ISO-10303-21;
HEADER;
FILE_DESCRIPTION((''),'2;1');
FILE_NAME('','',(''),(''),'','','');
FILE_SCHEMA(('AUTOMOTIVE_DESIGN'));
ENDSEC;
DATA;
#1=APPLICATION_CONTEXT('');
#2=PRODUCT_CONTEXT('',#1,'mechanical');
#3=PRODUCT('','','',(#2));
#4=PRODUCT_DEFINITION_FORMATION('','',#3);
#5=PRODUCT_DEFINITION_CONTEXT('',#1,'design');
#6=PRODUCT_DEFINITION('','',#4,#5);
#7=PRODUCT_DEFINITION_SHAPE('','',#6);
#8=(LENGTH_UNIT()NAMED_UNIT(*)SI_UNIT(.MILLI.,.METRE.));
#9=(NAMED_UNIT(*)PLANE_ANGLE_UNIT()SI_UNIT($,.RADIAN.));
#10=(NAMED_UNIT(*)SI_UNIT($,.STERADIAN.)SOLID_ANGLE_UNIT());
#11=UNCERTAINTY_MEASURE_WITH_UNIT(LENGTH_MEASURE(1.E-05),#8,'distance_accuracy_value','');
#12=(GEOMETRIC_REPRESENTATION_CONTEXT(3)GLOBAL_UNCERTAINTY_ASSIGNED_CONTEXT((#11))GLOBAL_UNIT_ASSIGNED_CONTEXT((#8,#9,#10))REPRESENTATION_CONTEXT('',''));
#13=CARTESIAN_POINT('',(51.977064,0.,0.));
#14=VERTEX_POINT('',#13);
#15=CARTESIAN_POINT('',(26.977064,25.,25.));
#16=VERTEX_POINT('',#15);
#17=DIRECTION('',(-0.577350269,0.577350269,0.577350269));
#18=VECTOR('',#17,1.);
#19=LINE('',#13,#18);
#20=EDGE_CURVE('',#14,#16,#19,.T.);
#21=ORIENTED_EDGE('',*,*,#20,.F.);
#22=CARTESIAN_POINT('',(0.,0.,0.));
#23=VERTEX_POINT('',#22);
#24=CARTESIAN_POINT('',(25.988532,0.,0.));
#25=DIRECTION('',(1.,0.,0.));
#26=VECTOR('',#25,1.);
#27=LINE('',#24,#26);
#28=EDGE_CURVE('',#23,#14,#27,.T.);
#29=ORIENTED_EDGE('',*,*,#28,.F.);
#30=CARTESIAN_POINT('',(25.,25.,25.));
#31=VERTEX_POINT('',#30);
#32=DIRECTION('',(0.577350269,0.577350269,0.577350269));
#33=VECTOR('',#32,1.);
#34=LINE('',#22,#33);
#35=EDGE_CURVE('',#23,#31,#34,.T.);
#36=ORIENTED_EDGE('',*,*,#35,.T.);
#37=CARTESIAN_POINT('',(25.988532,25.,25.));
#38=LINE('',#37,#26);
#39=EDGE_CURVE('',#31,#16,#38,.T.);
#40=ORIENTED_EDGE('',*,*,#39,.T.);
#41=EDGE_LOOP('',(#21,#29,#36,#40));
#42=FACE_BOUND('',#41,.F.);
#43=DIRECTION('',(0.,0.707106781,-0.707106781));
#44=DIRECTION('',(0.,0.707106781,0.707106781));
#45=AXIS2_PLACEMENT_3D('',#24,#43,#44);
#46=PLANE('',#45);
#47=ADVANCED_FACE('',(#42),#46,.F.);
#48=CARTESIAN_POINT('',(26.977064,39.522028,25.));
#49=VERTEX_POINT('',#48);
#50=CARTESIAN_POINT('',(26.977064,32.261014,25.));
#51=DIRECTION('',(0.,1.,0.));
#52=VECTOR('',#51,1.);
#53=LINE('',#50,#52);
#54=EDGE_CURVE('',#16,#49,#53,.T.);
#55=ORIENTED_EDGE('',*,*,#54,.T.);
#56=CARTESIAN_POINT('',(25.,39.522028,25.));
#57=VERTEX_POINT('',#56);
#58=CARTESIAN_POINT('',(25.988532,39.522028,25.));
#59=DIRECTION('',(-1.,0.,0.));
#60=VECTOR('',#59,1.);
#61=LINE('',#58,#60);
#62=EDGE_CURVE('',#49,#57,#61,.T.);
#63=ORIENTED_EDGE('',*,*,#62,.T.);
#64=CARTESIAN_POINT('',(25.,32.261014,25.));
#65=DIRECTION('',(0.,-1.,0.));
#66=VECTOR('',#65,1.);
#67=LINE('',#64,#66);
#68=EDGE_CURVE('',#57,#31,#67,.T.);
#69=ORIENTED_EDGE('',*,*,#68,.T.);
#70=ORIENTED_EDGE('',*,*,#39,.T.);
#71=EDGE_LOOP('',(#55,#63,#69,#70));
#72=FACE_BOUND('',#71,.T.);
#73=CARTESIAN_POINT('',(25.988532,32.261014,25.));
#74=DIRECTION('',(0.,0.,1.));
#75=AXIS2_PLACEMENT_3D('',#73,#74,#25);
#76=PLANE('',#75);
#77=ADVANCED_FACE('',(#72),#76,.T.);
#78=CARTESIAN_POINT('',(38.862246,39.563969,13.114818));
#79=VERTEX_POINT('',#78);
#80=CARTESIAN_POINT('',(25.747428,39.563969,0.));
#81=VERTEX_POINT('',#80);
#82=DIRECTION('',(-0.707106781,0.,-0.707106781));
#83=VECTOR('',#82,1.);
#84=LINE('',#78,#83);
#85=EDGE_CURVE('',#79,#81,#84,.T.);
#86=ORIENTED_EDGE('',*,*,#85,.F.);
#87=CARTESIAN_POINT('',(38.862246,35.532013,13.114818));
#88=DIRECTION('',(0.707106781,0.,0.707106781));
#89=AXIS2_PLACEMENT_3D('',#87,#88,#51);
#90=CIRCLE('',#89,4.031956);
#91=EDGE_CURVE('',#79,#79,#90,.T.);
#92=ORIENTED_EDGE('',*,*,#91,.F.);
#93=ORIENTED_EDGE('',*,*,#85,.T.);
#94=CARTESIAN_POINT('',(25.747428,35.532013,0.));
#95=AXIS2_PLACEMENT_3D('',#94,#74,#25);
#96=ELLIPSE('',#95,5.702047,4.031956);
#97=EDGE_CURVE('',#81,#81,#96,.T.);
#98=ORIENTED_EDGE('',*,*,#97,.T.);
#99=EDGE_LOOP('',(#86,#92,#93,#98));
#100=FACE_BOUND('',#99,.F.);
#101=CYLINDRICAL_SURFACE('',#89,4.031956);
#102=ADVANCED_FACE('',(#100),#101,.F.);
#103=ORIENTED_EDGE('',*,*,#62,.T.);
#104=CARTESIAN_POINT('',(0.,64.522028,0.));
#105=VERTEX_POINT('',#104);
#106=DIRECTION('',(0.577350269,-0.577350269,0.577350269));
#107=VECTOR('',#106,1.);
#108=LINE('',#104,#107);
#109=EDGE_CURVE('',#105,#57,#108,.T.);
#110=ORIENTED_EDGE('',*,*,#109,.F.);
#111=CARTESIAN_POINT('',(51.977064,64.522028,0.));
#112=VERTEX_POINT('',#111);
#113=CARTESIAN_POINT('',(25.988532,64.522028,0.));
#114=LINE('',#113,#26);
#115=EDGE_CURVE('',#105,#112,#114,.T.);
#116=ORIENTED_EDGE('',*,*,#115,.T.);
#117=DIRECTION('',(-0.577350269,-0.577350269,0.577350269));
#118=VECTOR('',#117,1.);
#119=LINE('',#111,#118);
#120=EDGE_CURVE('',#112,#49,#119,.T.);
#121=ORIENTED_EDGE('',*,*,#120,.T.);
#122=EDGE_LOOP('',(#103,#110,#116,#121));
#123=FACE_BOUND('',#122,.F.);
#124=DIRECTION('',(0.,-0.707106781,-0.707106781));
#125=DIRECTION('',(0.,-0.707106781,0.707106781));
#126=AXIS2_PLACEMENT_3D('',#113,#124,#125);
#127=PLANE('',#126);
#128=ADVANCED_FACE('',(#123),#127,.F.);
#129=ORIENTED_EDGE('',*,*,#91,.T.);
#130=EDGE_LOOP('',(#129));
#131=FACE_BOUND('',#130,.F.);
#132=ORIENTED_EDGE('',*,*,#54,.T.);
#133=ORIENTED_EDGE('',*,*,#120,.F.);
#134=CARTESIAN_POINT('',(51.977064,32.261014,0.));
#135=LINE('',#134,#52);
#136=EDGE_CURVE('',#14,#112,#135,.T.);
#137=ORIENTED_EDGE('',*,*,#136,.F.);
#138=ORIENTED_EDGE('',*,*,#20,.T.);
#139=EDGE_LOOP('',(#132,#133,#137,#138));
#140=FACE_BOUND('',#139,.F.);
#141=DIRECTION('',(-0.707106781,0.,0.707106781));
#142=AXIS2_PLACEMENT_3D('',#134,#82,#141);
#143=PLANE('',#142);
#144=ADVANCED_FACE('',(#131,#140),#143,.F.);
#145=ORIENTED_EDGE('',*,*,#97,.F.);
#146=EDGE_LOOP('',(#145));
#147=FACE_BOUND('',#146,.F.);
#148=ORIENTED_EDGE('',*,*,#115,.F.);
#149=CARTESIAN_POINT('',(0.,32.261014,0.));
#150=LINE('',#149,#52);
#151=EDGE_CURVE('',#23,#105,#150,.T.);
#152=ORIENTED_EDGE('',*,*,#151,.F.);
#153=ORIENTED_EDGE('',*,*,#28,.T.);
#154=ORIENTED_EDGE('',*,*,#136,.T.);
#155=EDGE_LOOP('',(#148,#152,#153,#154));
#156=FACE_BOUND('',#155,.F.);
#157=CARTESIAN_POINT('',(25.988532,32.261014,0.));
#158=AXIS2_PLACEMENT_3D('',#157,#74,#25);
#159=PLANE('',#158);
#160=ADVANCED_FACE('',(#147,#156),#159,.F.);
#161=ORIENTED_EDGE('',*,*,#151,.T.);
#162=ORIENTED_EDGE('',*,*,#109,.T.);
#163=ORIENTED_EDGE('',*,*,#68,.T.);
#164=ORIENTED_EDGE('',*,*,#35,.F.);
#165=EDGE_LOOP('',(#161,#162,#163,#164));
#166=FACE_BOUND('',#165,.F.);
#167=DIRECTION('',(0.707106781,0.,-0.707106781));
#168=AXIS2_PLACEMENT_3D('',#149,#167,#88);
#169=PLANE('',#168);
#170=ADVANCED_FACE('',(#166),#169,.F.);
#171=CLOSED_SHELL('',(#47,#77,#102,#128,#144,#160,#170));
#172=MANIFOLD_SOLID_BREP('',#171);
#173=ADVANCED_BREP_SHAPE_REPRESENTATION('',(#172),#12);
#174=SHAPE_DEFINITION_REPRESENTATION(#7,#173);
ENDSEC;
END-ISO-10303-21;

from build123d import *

# Parameters (mm, degrees)
F0_W     = 51.9770644605
F0_H     = 64.5220279694
F1_DEPTH = 25
F1_TAPER = 45
F2_R     = 4.0319564515
F3_DEPTH = 25


with BuildPart() as f1:
    # F0 (on Top) → F1 (new body)
    with BuildSketch(Plane.XY):
        with Locations((25.9885322303, 32.2610139847)):
            Rectangle(F0_W, F0_H)
    extrude(amount=F1_DEPTH, taper=F1_TAPER)

    # F2 (on face) → F3 (cut)
    with BuildSketch(Plane(origin=(25.9885322303, 0, 25.9885322303), x_dir=(0, 1, 0), z_dir=(0.7071067812, 0, 0.7071067812))):
        with Locations((35.5320125818, -18.2061810046)):
            Circle(F2_R)
    extrude(amount=-F3_DEPTH, mode=Mode.SUBTRACT)


solid = f1.part
